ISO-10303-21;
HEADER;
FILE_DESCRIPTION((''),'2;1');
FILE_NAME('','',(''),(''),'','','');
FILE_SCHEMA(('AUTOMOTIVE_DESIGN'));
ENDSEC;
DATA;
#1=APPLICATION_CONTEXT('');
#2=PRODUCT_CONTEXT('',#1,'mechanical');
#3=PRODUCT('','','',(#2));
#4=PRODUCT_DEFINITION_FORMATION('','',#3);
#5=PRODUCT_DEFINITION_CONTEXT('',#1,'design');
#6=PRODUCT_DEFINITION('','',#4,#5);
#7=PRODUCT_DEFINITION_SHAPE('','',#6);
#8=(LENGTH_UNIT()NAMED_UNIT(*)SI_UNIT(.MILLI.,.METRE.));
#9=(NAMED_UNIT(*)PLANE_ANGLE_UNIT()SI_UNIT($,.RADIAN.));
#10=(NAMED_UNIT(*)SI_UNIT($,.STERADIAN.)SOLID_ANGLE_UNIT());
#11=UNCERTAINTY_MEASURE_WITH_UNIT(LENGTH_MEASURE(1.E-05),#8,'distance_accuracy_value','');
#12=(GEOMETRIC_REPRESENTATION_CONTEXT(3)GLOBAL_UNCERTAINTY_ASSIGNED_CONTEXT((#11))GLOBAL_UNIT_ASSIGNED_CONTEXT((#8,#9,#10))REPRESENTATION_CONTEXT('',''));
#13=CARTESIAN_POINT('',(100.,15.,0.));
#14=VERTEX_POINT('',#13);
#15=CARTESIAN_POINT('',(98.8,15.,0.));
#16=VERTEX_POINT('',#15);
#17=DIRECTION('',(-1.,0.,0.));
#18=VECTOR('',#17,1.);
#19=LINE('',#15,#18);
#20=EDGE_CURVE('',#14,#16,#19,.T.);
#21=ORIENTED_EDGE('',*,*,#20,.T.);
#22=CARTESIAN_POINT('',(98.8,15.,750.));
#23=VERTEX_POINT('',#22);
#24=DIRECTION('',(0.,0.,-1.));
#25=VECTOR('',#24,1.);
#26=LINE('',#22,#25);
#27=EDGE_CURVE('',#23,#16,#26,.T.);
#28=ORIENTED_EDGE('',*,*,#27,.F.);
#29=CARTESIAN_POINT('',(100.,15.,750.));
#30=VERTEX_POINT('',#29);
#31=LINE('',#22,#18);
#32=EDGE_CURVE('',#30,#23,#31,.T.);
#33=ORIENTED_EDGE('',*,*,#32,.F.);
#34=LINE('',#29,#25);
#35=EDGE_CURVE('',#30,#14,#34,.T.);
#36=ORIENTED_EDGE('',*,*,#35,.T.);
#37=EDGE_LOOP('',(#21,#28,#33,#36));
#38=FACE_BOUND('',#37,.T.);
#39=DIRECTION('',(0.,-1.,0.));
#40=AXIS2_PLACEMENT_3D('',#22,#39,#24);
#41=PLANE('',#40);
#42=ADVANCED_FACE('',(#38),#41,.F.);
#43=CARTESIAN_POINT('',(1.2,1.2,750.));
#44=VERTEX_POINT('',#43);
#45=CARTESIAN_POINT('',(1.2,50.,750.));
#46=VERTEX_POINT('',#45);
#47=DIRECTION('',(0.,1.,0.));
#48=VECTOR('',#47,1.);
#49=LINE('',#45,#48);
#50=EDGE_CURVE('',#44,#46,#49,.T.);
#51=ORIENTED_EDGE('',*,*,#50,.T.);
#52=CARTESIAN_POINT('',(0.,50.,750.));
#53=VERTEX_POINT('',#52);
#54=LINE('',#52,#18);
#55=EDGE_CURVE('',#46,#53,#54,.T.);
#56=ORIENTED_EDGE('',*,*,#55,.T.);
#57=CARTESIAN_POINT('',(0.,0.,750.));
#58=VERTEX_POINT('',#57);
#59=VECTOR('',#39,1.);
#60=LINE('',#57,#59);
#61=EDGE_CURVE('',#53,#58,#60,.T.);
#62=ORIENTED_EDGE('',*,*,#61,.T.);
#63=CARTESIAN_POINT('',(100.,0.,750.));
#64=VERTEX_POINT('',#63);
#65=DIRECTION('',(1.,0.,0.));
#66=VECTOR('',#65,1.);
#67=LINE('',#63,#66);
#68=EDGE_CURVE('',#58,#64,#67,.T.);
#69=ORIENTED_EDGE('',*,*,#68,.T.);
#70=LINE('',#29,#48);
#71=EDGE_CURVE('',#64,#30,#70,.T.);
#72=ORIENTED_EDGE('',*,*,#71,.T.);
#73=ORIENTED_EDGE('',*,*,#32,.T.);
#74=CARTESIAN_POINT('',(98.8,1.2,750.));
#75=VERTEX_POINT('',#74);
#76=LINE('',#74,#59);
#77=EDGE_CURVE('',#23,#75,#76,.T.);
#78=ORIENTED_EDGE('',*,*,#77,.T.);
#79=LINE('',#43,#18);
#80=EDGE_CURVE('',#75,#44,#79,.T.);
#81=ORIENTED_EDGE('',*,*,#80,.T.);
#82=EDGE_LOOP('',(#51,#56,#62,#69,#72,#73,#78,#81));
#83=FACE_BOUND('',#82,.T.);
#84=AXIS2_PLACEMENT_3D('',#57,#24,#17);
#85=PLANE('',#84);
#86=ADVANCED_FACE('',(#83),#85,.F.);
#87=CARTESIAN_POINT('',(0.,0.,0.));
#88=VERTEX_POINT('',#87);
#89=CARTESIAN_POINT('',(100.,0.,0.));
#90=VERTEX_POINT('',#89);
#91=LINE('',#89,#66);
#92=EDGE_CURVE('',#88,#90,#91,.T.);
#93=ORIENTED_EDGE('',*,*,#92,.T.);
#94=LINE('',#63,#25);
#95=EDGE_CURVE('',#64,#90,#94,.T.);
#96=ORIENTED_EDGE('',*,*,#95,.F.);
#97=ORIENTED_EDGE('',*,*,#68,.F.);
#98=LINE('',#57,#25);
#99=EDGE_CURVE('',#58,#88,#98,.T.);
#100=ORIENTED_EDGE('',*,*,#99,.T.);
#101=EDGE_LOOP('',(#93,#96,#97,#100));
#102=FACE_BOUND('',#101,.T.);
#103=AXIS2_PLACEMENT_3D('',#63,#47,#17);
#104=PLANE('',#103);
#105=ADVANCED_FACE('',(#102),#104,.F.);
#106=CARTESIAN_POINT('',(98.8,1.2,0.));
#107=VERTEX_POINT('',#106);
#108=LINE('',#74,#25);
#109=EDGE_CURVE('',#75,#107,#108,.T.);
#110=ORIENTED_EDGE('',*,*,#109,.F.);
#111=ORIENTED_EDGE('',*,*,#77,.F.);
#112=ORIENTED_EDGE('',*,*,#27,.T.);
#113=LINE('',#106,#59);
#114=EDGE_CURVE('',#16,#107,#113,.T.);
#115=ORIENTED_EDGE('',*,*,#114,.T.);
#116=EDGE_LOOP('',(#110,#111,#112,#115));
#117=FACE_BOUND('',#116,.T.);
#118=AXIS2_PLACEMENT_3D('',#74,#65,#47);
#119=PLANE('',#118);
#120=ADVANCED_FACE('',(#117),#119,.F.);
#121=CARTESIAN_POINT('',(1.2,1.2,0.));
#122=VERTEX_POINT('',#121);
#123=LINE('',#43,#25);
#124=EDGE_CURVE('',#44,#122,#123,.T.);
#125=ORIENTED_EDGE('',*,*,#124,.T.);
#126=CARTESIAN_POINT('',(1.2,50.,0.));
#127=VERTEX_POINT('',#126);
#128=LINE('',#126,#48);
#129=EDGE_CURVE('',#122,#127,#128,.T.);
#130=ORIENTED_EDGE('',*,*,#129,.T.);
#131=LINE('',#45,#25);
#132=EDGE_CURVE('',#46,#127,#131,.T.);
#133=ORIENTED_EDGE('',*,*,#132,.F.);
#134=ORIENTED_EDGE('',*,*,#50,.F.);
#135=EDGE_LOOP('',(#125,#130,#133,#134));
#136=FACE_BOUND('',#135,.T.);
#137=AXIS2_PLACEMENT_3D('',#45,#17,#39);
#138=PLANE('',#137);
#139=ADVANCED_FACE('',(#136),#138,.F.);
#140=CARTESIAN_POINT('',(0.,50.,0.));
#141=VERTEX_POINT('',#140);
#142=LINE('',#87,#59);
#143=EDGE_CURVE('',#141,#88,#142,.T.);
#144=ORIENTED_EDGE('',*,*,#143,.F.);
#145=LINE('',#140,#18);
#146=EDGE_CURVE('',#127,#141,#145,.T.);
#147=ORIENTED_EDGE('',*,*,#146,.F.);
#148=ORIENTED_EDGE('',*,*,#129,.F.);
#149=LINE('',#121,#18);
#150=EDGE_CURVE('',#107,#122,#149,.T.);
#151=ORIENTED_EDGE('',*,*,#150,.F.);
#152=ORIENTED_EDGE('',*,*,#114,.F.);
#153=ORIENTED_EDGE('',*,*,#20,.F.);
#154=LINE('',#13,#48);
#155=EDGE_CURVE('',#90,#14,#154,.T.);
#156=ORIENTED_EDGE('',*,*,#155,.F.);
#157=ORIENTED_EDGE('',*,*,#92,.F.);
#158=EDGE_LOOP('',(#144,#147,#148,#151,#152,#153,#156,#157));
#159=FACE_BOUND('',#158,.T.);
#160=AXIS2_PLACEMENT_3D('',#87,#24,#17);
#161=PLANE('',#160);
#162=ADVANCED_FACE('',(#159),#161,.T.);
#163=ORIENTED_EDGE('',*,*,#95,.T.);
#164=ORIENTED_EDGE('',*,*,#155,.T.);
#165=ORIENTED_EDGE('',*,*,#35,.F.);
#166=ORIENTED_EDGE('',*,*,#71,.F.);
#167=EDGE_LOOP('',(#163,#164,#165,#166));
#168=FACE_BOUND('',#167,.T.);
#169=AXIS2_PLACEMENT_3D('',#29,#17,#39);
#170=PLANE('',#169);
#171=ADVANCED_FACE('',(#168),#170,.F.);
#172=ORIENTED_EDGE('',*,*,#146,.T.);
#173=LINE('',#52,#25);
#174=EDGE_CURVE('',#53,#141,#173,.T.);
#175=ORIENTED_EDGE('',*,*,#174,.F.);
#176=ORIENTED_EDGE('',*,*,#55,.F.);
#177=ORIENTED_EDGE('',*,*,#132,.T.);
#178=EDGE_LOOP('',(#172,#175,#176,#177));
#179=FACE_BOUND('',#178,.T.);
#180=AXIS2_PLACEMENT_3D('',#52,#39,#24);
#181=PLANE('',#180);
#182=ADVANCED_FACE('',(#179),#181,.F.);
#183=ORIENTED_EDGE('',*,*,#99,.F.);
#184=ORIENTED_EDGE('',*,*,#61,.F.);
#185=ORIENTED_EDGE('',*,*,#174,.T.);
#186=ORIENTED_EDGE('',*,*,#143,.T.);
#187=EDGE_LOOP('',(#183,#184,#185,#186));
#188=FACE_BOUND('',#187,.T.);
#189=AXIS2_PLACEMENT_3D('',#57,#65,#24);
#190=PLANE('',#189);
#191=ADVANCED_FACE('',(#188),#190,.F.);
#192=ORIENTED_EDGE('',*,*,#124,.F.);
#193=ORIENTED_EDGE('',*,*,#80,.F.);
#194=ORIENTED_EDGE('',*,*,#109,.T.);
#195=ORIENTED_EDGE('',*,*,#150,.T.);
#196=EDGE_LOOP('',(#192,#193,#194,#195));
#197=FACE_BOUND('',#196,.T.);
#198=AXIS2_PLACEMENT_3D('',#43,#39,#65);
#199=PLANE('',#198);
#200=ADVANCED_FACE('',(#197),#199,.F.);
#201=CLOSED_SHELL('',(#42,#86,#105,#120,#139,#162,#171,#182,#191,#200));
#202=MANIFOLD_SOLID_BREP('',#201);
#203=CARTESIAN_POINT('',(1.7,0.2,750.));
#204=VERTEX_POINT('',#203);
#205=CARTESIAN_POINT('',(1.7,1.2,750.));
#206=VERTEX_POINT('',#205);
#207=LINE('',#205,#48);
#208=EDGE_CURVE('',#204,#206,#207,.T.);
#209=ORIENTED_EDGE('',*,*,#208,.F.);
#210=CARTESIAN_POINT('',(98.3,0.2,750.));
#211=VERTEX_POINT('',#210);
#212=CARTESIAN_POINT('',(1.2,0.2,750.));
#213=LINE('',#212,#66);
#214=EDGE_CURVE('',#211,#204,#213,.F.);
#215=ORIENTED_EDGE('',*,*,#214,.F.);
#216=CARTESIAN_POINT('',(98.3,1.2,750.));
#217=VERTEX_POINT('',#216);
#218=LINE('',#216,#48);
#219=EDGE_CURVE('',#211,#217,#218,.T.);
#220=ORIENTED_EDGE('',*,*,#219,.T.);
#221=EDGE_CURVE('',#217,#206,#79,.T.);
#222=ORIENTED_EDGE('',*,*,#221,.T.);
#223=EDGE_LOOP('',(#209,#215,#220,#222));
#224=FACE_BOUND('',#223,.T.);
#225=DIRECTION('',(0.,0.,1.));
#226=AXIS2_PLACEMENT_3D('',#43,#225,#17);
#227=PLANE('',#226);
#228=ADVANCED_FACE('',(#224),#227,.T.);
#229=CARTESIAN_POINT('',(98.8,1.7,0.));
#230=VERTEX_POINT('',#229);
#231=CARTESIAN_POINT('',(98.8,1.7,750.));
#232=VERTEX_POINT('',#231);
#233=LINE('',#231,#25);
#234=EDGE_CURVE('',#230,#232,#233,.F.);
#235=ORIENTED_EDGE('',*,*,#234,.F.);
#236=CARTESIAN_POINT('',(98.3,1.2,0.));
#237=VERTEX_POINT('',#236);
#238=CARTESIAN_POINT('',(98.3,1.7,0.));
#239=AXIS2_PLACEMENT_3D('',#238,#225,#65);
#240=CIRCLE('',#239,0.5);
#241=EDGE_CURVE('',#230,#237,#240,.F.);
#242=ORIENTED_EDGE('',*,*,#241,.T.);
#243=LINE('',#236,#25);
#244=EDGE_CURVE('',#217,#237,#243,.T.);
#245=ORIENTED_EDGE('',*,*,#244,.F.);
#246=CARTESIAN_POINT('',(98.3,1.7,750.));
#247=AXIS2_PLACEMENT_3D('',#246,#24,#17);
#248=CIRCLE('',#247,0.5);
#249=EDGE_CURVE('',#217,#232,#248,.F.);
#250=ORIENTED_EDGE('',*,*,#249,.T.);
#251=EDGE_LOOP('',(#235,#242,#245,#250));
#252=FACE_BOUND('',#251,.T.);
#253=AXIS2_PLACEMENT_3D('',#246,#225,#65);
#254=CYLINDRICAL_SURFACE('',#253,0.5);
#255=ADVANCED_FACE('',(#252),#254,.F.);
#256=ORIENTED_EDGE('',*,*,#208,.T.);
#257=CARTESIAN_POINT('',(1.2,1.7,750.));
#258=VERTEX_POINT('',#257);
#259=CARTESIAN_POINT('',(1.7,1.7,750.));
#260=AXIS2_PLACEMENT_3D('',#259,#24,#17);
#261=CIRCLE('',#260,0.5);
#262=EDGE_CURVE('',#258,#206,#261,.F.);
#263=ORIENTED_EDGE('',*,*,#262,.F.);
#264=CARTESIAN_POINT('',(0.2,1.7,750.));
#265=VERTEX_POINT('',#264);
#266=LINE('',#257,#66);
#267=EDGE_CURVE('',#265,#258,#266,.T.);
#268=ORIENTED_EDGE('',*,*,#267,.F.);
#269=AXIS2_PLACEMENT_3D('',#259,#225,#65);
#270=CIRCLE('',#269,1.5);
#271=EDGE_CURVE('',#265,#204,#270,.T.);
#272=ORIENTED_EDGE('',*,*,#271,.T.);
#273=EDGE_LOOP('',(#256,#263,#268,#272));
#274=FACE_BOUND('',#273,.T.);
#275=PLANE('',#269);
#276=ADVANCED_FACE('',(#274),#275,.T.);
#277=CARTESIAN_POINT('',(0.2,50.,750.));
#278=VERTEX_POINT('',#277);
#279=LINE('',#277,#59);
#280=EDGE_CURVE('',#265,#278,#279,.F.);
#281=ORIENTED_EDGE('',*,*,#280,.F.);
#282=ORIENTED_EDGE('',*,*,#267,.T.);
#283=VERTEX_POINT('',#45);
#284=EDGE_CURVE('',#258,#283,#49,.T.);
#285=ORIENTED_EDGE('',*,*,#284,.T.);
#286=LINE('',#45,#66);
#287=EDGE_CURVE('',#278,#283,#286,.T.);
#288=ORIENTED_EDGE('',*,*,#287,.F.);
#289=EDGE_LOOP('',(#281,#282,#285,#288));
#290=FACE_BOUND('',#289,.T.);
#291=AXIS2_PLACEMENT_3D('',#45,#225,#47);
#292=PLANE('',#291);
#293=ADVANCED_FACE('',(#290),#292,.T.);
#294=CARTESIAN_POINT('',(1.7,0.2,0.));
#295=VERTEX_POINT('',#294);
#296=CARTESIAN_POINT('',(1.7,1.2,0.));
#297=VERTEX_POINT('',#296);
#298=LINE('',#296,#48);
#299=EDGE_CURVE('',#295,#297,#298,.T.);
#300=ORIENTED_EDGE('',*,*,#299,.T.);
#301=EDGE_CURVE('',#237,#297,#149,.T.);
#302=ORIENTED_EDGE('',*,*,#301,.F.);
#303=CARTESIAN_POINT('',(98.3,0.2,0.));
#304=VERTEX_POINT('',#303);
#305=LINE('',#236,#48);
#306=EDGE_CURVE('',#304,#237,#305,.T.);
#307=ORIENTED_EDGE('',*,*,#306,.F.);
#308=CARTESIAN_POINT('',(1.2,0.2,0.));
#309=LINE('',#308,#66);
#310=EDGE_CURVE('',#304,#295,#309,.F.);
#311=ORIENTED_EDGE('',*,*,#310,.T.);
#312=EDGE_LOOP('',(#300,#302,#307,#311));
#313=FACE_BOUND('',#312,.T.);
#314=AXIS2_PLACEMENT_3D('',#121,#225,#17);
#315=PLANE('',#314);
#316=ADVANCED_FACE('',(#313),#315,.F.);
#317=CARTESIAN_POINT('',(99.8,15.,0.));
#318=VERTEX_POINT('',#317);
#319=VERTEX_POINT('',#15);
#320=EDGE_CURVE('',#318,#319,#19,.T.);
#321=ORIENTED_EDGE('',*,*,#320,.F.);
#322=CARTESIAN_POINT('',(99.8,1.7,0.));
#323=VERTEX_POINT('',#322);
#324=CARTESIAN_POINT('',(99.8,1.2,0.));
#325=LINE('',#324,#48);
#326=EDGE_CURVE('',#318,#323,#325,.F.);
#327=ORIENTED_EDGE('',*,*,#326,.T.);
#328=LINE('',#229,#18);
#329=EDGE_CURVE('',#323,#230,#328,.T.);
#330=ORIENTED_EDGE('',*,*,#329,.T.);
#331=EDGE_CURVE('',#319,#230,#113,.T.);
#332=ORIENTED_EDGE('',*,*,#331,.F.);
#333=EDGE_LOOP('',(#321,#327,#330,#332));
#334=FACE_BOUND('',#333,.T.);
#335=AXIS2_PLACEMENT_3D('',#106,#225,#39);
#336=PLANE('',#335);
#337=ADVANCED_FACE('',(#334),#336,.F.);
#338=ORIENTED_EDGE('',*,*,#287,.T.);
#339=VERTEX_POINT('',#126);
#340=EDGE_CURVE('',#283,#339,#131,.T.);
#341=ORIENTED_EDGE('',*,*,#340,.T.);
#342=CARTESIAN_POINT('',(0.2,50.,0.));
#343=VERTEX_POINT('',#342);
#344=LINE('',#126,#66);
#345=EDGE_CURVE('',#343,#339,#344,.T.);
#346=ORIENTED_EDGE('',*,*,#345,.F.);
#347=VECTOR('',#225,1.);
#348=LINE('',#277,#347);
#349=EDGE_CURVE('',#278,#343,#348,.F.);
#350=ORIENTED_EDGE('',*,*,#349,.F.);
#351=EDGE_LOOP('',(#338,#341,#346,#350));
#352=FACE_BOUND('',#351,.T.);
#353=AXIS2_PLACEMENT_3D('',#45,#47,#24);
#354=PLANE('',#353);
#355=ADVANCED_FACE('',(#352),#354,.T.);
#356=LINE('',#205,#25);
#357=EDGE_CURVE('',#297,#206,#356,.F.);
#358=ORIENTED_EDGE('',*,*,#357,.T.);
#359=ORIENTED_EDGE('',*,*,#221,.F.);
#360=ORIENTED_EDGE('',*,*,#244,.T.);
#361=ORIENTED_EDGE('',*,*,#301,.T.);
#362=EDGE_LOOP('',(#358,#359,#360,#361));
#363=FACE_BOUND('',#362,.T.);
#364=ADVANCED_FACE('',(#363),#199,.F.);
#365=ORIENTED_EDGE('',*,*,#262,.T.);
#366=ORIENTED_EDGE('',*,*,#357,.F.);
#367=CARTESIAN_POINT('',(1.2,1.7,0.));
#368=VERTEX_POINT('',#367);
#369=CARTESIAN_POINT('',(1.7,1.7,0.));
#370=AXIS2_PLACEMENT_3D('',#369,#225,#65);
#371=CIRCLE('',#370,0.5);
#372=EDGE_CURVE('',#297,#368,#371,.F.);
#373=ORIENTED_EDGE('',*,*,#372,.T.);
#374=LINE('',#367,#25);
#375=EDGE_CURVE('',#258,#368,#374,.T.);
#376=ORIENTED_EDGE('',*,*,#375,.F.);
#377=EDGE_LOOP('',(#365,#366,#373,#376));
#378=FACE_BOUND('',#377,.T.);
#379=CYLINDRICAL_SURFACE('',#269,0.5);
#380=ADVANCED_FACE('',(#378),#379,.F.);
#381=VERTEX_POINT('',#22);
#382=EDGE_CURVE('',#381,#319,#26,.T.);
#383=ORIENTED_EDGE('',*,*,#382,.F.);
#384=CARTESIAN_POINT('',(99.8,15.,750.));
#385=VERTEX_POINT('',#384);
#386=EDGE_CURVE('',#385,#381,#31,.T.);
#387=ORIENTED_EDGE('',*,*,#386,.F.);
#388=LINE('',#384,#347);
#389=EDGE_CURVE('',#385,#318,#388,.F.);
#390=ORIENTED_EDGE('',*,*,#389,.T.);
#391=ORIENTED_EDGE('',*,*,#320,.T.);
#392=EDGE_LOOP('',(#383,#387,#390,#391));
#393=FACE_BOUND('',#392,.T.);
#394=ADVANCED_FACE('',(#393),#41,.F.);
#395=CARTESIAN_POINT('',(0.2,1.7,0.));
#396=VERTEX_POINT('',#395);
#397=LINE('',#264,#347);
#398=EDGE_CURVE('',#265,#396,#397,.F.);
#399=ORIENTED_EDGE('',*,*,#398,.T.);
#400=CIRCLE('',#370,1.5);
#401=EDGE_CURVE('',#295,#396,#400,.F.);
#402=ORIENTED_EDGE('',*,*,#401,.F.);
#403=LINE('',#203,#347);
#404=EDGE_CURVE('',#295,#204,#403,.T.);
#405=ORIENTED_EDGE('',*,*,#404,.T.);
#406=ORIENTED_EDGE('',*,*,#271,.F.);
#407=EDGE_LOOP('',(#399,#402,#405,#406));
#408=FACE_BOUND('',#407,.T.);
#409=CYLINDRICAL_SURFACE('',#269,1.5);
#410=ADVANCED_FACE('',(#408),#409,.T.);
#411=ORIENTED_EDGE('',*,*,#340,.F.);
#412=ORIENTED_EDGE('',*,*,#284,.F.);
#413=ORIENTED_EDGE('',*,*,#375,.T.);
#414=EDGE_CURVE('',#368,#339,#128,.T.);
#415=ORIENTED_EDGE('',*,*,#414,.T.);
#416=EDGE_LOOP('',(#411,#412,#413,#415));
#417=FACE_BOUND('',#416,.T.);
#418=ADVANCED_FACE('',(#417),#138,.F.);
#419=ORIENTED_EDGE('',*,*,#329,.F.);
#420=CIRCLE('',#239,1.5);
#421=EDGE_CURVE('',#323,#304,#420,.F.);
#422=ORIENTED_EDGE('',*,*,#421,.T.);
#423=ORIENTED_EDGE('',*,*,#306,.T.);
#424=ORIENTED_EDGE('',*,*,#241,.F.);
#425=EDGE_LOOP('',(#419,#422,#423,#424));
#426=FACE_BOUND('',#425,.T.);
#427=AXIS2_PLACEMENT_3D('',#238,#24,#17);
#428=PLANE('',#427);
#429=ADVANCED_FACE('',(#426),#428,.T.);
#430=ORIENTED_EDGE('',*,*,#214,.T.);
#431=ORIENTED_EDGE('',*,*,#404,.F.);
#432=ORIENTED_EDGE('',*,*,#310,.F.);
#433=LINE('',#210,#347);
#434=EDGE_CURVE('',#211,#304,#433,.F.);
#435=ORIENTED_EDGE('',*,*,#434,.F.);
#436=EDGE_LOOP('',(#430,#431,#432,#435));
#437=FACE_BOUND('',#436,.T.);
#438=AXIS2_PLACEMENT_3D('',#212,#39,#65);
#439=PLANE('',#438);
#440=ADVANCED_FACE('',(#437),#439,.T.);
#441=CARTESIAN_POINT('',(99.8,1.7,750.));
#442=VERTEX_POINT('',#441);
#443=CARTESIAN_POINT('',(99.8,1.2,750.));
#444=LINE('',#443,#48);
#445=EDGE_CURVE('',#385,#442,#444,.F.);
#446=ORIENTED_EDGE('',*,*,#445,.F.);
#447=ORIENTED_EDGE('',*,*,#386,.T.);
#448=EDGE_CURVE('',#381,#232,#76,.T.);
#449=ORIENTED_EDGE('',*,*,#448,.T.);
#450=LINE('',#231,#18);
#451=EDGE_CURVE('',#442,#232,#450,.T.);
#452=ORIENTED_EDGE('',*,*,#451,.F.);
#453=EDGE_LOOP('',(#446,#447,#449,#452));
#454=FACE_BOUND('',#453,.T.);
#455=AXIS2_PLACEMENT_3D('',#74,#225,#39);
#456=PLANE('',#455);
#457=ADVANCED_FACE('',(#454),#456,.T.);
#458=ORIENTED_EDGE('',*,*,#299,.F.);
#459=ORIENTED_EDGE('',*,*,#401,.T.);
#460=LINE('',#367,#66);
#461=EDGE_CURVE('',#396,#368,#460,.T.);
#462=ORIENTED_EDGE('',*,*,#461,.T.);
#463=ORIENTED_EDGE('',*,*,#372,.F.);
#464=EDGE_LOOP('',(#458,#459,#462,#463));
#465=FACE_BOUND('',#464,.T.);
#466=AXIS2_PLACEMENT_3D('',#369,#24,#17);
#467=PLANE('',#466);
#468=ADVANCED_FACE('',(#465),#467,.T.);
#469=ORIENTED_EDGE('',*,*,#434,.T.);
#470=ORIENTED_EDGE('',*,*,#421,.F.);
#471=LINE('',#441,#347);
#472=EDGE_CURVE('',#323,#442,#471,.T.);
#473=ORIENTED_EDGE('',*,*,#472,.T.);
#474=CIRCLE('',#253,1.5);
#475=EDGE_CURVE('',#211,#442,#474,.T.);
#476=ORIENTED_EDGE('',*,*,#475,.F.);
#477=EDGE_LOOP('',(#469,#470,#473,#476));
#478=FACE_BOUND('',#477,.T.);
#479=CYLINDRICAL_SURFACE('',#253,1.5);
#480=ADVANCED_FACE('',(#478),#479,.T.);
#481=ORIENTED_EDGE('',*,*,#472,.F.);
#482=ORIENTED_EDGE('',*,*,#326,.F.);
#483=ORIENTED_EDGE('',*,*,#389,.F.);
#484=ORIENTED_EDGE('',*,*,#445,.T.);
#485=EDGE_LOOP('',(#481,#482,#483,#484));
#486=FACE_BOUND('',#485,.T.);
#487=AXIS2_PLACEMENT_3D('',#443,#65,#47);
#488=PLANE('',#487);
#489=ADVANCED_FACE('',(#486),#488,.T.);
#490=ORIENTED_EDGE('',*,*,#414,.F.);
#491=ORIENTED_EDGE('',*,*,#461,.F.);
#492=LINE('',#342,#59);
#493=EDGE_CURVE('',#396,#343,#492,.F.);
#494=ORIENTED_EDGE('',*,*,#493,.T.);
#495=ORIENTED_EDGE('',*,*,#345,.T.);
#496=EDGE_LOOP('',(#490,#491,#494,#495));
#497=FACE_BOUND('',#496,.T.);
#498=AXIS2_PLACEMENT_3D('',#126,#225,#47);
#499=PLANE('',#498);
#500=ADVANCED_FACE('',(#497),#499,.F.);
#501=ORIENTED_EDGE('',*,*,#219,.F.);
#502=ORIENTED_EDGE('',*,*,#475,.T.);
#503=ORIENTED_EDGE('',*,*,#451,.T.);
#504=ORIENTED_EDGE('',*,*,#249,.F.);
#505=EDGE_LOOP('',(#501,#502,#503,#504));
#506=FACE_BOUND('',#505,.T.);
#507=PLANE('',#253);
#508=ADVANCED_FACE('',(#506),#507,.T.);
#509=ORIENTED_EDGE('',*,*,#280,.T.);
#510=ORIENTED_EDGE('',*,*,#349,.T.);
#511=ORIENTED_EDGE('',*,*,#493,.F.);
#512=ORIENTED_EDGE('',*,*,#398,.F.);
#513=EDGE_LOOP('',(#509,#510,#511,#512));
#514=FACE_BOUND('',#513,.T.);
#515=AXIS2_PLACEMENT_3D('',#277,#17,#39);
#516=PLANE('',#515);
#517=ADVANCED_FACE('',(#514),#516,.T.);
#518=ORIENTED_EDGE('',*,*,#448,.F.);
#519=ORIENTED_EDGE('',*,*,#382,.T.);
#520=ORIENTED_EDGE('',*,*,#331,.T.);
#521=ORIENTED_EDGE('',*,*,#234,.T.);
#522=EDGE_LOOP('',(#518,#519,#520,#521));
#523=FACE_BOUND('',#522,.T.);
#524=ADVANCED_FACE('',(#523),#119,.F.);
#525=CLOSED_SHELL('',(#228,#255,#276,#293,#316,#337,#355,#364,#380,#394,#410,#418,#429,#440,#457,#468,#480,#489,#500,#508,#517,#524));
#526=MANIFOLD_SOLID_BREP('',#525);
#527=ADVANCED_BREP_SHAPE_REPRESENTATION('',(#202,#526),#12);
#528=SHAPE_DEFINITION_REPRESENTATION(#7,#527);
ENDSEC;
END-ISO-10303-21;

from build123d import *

# Parameters (mm, degrees)
EXTRUDE_2_DEPTH     = 750
SHEET_METAL_3_DEPTH = 750


# Read off the part's stored shape, not the designer's step: Преобразовать-Твердое тело3
with BuildPart() as part:
    # Эскиз3 → Бобышка-Вытянуть2 (new body)
    with BuildSketch(Plane.XY):
        Polygon((0, 0), (0, 50), (1.2, 50), (1.2, 1.2), (98.8, 1.2), (98.8, 15), (100, 15), (100, 0), align=None)
    extrude(amount=EXTRUDE_2_DEPTH)


with BuildPart() as body_2:
    # Sheet Metal 3 outline → Sheet Metal 3 (new body)
    with BuildSketch(Plane.XY):
        with BuildLine():
            Line((1.2, 1.7), (1.2, 50))
            Line((1.2, 50), (0.2, 50))
            Line((0.2, 50), (0.2, 1.7))
            ThreePointArc((0.2, 1.7), (0.639339828, 0.639339828), (1.7, 0.2))
            Line((1.7, 0.2), (98.3, 0.2))
            ThreePointArc((98.3, 0.2), (99.360660172, 0.639339828), (99.8, 1.7))
            Line((99.8, 1.7), (99.8, 15))
            Line((99.8, 15), (98.8, 15))
            Line((98.8, 15), (98.8, 1.7))
            ThreePointArc((98.8, 1.7), (98.653553391, 1.346446609), (98.3, 1.2))
            Line((98.3, 1.2), (1.7, 1.2))
            ThreePointArc((1.7, 1.2), (1.346446609, 1.346446609), (1.2, 1.7))
        make_face()
    extrude(amount=SHEET_METAL_3_DEPTH)


solid = Compound([part.part, body_2.part])
